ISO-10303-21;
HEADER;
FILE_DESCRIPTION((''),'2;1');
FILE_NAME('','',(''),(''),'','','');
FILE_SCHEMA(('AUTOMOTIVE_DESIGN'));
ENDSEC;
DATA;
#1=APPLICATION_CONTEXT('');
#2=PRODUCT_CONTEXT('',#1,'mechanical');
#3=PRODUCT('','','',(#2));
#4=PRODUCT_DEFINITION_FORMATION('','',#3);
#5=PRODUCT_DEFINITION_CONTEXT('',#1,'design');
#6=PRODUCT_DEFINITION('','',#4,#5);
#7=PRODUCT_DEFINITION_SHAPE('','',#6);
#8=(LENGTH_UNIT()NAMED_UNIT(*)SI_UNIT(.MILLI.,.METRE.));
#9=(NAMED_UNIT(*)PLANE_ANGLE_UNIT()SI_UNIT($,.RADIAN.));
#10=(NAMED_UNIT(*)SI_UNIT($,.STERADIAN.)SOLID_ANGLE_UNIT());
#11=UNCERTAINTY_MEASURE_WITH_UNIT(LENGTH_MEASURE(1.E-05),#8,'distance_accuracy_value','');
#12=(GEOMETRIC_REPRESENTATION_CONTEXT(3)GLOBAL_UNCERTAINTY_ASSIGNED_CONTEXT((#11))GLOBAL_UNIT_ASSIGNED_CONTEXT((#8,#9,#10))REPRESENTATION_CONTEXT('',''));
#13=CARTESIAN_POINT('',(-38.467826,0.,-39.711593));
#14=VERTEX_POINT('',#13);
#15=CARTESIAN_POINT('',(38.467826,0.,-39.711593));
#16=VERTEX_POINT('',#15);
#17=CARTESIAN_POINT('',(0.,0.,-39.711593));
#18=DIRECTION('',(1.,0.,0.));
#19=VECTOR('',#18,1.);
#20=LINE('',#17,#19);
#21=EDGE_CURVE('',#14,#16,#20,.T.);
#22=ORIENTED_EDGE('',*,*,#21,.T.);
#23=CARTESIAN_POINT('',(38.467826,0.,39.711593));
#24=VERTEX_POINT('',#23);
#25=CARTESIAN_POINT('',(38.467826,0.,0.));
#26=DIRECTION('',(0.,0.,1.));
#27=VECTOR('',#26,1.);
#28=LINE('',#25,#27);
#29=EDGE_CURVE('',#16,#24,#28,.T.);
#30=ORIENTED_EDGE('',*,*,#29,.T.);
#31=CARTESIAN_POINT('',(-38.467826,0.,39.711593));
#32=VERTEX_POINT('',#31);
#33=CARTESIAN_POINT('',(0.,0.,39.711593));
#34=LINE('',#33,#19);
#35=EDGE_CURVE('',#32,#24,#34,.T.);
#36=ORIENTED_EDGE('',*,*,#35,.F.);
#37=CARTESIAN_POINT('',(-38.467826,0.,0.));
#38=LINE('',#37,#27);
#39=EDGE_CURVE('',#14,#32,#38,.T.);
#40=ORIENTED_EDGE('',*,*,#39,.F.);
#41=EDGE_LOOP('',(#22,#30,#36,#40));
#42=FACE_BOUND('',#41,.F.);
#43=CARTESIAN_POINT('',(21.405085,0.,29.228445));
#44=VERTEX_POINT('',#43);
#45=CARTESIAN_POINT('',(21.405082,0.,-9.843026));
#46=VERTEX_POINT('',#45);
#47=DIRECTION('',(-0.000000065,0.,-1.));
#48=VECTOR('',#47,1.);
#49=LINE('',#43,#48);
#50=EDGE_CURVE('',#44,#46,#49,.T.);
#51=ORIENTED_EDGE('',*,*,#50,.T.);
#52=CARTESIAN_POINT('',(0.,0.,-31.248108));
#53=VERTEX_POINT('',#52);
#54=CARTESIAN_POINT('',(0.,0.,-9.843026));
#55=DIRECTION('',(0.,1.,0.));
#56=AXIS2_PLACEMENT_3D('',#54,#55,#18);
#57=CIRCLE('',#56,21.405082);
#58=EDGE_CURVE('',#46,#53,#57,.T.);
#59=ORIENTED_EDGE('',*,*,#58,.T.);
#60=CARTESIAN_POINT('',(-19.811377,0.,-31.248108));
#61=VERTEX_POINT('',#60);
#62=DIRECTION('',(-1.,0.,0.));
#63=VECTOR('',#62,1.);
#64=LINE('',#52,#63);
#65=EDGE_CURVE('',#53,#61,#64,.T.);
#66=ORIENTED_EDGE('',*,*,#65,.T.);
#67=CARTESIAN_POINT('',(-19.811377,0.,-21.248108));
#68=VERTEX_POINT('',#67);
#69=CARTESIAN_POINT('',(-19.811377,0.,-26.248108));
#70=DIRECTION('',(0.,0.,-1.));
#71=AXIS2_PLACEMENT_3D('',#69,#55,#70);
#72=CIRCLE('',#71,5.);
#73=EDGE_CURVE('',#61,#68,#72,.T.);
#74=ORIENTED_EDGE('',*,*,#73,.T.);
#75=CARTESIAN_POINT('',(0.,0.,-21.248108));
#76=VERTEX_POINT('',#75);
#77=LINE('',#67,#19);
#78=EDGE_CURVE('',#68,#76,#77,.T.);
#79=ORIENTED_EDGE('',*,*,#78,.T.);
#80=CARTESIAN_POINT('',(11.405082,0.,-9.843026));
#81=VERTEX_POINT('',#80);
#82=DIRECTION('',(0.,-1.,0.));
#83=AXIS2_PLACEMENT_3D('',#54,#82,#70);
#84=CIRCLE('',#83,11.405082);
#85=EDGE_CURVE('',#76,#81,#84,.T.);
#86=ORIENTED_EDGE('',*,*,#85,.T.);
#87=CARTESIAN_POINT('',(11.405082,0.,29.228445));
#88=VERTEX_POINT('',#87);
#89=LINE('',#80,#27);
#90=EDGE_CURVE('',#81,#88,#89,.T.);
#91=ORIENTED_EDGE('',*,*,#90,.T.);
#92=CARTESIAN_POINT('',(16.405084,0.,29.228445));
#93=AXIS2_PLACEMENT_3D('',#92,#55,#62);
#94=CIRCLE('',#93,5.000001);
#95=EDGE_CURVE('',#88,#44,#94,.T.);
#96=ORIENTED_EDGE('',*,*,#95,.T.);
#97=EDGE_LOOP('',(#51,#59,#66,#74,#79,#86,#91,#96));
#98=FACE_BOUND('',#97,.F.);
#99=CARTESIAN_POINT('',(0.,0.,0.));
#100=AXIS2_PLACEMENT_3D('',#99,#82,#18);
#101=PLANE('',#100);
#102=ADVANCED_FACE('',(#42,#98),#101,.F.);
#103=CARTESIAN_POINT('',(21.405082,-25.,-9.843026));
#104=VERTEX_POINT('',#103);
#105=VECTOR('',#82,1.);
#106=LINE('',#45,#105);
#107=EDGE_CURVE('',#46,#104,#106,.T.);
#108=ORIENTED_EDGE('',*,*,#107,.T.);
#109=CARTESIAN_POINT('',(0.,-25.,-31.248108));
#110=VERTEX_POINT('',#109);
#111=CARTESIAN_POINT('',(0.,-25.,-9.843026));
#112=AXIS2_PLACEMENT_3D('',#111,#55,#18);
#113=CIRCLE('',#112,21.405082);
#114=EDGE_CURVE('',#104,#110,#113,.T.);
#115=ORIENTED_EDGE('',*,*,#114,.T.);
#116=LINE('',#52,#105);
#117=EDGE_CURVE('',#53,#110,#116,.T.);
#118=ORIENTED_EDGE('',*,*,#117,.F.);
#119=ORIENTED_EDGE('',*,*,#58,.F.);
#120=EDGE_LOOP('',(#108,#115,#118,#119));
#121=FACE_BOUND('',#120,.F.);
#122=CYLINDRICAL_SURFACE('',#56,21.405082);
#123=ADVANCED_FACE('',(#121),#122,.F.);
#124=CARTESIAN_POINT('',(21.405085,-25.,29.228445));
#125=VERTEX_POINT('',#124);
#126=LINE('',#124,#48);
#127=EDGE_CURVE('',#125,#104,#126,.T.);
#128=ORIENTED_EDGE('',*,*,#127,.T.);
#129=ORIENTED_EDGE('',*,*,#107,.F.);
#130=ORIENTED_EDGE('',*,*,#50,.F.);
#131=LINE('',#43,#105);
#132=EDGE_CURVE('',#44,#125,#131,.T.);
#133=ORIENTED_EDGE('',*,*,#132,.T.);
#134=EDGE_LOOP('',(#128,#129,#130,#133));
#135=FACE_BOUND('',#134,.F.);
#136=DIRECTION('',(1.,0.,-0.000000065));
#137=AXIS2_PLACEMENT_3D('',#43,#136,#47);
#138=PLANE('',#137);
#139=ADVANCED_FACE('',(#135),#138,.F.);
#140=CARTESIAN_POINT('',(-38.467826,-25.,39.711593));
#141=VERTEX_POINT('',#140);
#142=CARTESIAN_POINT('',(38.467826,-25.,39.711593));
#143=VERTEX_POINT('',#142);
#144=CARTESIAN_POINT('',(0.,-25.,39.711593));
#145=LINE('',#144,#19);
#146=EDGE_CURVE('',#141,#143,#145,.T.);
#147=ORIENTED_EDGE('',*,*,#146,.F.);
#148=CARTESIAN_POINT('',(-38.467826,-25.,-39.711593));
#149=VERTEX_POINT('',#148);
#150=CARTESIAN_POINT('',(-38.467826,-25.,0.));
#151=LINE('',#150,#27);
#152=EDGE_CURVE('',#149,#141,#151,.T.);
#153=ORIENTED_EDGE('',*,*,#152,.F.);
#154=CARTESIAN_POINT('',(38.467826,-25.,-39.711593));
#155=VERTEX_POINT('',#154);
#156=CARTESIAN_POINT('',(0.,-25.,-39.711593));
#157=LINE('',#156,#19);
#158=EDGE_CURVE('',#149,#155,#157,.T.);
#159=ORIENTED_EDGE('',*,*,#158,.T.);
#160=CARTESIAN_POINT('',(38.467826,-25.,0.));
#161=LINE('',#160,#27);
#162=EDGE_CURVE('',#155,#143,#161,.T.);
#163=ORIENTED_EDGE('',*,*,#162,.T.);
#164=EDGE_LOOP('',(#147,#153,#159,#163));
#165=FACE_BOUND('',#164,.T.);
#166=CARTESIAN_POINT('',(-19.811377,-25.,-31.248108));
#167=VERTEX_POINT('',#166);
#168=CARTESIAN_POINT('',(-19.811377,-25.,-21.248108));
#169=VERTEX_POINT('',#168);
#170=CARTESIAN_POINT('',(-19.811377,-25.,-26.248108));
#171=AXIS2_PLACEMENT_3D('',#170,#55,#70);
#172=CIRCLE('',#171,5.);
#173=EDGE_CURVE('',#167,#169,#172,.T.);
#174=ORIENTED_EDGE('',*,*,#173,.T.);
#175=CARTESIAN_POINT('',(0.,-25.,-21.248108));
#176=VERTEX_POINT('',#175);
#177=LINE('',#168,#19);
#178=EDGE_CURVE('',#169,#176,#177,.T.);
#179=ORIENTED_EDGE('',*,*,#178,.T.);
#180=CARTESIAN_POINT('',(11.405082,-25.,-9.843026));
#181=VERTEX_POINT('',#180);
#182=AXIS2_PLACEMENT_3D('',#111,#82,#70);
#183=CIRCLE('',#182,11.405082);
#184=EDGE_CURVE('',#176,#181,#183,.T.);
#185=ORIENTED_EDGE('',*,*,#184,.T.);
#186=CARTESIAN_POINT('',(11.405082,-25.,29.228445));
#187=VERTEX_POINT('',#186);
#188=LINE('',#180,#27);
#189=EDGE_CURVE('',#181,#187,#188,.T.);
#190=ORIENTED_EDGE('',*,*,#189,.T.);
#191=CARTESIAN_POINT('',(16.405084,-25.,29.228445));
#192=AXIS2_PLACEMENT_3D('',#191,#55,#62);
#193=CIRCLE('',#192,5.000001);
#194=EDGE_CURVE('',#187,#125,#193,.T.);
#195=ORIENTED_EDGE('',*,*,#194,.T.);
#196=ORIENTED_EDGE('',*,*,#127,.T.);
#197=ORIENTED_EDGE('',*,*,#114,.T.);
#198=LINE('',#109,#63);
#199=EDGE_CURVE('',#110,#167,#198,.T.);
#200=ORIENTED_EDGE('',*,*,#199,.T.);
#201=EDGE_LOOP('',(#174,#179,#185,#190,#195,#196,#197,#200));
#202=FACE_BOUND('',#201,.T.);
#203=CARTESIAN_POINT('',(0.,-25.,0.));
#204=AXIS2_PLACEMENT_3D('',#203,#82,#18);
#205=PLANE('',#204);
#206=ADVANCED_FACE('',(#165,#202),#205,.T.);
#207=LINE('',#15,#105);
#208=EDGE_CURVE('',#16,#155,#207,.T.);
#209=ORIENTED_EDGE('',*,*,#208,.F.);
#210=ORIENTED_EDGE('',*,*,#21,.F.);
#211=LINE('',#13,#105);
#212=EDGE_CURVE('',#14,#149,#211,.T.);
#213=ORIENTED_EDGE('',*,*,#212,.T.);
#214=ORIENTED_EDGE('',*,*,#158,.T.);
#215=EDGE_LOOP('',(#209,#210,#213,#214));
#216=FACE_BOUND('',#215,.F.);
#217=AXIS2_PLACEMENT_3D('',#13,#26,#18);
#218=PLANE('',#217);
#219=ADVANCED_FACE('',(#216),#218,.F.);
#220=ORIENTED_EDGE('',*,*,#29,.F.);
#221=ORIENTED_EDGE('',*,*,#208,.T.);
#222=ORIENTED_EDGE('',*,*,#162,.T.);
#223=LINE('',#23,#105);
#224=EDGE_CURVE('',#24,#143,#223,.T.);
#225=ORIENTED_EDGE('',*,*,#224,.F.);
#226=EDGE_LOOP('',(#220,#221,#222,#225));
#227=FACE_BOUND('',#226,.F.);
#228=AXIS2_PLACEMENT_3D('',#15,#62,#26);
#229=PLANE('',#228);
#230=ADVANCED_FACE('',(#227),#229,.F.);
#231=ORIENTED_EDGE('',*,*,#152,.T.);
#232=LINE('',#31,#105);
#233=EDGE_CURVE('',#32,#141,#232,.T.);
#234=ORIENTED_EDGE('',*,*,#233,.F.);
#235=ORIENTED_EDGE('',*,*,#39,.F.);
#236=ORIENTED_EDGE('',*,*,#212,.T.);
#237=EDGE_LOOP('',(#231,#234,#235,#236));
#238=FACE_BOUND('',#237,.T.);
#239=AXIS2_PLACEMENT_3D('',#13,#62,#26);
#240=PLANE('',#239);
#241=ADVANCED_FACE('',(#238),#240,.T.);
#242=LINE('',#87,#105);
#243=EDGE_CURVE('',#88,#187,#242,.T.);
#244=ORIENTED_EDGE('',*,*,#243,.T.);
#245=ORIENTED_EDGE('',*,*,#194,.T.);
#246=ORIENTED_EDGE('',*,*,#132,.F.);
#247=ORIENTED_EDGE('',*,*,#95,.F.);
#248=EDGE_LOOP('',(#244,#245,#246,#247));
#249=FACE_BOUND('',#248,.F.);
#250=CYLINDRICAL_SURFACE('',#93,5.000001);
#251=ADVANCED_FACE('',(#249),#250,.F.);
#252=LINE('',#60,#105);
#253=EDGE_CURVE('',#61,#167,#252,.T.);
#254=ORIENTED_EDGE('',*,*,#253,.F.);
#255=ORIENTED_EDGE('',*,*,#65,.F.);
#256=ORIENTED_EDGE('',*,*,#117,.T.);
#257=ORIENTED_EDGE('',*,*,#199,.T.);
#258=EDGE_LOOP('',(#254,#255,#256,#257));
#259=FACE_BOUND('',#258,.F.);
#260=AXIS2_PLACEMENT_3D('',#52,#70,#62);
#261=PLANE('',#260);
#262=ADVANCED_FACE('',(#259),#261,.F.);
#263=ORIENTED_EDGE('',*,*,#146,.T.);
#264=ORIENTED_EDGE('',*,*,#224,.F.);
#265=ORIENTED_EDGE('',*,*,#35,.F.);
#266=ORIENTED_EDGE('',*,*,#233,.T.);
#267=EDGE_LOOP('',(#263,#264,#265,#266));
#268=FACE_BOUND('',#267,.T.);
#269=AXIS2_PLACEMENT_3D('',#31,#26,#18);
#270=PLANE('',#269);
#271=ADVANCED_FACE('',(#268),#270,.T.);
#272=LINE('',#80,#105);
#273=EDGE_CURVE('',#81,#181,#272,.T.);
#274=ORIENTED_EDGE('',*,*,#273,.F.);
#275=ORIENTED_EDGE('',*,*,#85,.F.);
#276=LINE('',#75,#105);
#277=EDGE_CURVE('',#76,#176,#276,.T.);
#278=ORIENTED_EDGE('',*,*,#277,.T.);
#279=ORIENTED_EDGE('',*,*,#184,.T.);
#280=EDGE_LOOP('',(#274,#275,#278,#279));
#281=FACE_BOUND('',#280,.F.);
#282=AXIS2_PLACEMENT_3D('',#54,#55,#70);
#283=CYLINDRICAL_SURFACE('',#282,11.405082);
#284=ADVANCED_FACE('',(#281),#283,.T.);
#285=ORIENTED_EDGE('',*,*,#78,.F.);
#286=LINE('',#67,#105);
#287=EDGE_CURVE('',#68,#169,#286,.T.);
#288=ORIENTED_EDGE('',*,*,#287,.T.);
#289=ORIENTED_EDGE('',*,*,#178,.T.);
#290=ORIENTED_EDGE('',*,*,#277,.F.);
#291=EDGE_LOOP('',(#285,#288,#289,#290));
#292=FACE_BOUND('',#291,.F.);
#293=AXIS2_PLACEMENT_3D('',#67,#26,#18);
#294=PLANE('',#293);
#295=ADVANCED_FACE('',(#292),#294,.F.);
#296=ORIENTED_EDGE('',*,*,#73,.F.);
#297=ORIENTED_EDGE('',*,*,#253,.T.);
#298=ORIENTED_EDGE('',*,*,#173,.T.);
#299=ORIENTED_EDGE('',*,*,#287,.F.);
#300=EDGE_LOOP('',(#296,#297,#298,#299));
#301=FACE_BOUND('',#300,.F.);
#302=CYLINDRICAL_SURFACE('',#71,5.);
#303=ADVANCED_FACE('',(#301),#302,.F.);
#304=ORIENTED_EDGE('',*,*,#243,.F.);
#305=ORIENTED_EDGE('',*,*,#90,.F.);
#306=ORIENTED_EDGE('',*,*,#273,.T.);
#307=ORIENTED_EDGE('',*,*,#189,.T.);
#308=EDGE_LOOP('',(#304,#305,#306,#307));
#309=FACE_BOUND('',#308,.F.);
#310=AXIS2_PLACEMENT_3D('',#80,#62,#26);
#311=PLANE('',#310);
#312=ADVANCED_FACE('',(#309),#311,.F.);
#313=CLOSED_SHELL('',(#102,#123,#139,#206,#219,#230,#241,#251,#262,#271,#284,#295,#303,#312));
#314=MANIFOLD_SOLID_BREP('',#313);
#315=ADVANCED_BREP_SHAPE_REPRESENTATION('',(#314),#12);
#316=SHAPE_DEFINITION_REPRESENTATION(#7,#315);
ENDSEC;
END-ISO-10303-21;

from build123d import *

# Parameters (mm, degrees)
F0_W     = 76.9356526434
F0_H     = 79.423185253
F1_DEPTH = 25


# Not quite as in the source:
# - ends of sketch curves that miss each other by under 0.0002 mm in the source are joined


with BuildPart() as f1:
    # F0 (on Front) → F1 (new body)
    with BuildSketch(Plane.XZ):
        Rectangle(F0_W, F0_H)
        with BuildLine():
            Line((11.4050824274, -9.8430258844), (11.4050824274, 29.2284450168))
            ThreePointArc((11.4050824274, 29.2284450168), (16.4050836887, 34.228446278), (21.4050849499, 29.2284450168))
            Line((21.4050849499, 29.2284450168), (21.4050824274, -9.8430258844))
            ThreePointArc((21.4050824274, -9.8430258844), (15.1356789363, -24.9787048207), (0, -31.2481083118))
            Line((0, -31.2481083118), (-19.8113770242, -31.2481083118))
            ThreePointArc((-19.8113770242, -31.2481083118), (-24.8113770242, -26.2481083118), (-19.8113770242, -21.2481083118))
            Line((-19.8113770242, -21.2481083118), (0, -21.2481083118))
            ThreePointArc((0, -21.2481083118), (8.0646111244, -17.9076370088), (11.4050824274, -9.8430258844))
        make_face(mode=Mode.SUBTRACT)
    extrude(amount=F1_DEPTH)


solid = f1.part
